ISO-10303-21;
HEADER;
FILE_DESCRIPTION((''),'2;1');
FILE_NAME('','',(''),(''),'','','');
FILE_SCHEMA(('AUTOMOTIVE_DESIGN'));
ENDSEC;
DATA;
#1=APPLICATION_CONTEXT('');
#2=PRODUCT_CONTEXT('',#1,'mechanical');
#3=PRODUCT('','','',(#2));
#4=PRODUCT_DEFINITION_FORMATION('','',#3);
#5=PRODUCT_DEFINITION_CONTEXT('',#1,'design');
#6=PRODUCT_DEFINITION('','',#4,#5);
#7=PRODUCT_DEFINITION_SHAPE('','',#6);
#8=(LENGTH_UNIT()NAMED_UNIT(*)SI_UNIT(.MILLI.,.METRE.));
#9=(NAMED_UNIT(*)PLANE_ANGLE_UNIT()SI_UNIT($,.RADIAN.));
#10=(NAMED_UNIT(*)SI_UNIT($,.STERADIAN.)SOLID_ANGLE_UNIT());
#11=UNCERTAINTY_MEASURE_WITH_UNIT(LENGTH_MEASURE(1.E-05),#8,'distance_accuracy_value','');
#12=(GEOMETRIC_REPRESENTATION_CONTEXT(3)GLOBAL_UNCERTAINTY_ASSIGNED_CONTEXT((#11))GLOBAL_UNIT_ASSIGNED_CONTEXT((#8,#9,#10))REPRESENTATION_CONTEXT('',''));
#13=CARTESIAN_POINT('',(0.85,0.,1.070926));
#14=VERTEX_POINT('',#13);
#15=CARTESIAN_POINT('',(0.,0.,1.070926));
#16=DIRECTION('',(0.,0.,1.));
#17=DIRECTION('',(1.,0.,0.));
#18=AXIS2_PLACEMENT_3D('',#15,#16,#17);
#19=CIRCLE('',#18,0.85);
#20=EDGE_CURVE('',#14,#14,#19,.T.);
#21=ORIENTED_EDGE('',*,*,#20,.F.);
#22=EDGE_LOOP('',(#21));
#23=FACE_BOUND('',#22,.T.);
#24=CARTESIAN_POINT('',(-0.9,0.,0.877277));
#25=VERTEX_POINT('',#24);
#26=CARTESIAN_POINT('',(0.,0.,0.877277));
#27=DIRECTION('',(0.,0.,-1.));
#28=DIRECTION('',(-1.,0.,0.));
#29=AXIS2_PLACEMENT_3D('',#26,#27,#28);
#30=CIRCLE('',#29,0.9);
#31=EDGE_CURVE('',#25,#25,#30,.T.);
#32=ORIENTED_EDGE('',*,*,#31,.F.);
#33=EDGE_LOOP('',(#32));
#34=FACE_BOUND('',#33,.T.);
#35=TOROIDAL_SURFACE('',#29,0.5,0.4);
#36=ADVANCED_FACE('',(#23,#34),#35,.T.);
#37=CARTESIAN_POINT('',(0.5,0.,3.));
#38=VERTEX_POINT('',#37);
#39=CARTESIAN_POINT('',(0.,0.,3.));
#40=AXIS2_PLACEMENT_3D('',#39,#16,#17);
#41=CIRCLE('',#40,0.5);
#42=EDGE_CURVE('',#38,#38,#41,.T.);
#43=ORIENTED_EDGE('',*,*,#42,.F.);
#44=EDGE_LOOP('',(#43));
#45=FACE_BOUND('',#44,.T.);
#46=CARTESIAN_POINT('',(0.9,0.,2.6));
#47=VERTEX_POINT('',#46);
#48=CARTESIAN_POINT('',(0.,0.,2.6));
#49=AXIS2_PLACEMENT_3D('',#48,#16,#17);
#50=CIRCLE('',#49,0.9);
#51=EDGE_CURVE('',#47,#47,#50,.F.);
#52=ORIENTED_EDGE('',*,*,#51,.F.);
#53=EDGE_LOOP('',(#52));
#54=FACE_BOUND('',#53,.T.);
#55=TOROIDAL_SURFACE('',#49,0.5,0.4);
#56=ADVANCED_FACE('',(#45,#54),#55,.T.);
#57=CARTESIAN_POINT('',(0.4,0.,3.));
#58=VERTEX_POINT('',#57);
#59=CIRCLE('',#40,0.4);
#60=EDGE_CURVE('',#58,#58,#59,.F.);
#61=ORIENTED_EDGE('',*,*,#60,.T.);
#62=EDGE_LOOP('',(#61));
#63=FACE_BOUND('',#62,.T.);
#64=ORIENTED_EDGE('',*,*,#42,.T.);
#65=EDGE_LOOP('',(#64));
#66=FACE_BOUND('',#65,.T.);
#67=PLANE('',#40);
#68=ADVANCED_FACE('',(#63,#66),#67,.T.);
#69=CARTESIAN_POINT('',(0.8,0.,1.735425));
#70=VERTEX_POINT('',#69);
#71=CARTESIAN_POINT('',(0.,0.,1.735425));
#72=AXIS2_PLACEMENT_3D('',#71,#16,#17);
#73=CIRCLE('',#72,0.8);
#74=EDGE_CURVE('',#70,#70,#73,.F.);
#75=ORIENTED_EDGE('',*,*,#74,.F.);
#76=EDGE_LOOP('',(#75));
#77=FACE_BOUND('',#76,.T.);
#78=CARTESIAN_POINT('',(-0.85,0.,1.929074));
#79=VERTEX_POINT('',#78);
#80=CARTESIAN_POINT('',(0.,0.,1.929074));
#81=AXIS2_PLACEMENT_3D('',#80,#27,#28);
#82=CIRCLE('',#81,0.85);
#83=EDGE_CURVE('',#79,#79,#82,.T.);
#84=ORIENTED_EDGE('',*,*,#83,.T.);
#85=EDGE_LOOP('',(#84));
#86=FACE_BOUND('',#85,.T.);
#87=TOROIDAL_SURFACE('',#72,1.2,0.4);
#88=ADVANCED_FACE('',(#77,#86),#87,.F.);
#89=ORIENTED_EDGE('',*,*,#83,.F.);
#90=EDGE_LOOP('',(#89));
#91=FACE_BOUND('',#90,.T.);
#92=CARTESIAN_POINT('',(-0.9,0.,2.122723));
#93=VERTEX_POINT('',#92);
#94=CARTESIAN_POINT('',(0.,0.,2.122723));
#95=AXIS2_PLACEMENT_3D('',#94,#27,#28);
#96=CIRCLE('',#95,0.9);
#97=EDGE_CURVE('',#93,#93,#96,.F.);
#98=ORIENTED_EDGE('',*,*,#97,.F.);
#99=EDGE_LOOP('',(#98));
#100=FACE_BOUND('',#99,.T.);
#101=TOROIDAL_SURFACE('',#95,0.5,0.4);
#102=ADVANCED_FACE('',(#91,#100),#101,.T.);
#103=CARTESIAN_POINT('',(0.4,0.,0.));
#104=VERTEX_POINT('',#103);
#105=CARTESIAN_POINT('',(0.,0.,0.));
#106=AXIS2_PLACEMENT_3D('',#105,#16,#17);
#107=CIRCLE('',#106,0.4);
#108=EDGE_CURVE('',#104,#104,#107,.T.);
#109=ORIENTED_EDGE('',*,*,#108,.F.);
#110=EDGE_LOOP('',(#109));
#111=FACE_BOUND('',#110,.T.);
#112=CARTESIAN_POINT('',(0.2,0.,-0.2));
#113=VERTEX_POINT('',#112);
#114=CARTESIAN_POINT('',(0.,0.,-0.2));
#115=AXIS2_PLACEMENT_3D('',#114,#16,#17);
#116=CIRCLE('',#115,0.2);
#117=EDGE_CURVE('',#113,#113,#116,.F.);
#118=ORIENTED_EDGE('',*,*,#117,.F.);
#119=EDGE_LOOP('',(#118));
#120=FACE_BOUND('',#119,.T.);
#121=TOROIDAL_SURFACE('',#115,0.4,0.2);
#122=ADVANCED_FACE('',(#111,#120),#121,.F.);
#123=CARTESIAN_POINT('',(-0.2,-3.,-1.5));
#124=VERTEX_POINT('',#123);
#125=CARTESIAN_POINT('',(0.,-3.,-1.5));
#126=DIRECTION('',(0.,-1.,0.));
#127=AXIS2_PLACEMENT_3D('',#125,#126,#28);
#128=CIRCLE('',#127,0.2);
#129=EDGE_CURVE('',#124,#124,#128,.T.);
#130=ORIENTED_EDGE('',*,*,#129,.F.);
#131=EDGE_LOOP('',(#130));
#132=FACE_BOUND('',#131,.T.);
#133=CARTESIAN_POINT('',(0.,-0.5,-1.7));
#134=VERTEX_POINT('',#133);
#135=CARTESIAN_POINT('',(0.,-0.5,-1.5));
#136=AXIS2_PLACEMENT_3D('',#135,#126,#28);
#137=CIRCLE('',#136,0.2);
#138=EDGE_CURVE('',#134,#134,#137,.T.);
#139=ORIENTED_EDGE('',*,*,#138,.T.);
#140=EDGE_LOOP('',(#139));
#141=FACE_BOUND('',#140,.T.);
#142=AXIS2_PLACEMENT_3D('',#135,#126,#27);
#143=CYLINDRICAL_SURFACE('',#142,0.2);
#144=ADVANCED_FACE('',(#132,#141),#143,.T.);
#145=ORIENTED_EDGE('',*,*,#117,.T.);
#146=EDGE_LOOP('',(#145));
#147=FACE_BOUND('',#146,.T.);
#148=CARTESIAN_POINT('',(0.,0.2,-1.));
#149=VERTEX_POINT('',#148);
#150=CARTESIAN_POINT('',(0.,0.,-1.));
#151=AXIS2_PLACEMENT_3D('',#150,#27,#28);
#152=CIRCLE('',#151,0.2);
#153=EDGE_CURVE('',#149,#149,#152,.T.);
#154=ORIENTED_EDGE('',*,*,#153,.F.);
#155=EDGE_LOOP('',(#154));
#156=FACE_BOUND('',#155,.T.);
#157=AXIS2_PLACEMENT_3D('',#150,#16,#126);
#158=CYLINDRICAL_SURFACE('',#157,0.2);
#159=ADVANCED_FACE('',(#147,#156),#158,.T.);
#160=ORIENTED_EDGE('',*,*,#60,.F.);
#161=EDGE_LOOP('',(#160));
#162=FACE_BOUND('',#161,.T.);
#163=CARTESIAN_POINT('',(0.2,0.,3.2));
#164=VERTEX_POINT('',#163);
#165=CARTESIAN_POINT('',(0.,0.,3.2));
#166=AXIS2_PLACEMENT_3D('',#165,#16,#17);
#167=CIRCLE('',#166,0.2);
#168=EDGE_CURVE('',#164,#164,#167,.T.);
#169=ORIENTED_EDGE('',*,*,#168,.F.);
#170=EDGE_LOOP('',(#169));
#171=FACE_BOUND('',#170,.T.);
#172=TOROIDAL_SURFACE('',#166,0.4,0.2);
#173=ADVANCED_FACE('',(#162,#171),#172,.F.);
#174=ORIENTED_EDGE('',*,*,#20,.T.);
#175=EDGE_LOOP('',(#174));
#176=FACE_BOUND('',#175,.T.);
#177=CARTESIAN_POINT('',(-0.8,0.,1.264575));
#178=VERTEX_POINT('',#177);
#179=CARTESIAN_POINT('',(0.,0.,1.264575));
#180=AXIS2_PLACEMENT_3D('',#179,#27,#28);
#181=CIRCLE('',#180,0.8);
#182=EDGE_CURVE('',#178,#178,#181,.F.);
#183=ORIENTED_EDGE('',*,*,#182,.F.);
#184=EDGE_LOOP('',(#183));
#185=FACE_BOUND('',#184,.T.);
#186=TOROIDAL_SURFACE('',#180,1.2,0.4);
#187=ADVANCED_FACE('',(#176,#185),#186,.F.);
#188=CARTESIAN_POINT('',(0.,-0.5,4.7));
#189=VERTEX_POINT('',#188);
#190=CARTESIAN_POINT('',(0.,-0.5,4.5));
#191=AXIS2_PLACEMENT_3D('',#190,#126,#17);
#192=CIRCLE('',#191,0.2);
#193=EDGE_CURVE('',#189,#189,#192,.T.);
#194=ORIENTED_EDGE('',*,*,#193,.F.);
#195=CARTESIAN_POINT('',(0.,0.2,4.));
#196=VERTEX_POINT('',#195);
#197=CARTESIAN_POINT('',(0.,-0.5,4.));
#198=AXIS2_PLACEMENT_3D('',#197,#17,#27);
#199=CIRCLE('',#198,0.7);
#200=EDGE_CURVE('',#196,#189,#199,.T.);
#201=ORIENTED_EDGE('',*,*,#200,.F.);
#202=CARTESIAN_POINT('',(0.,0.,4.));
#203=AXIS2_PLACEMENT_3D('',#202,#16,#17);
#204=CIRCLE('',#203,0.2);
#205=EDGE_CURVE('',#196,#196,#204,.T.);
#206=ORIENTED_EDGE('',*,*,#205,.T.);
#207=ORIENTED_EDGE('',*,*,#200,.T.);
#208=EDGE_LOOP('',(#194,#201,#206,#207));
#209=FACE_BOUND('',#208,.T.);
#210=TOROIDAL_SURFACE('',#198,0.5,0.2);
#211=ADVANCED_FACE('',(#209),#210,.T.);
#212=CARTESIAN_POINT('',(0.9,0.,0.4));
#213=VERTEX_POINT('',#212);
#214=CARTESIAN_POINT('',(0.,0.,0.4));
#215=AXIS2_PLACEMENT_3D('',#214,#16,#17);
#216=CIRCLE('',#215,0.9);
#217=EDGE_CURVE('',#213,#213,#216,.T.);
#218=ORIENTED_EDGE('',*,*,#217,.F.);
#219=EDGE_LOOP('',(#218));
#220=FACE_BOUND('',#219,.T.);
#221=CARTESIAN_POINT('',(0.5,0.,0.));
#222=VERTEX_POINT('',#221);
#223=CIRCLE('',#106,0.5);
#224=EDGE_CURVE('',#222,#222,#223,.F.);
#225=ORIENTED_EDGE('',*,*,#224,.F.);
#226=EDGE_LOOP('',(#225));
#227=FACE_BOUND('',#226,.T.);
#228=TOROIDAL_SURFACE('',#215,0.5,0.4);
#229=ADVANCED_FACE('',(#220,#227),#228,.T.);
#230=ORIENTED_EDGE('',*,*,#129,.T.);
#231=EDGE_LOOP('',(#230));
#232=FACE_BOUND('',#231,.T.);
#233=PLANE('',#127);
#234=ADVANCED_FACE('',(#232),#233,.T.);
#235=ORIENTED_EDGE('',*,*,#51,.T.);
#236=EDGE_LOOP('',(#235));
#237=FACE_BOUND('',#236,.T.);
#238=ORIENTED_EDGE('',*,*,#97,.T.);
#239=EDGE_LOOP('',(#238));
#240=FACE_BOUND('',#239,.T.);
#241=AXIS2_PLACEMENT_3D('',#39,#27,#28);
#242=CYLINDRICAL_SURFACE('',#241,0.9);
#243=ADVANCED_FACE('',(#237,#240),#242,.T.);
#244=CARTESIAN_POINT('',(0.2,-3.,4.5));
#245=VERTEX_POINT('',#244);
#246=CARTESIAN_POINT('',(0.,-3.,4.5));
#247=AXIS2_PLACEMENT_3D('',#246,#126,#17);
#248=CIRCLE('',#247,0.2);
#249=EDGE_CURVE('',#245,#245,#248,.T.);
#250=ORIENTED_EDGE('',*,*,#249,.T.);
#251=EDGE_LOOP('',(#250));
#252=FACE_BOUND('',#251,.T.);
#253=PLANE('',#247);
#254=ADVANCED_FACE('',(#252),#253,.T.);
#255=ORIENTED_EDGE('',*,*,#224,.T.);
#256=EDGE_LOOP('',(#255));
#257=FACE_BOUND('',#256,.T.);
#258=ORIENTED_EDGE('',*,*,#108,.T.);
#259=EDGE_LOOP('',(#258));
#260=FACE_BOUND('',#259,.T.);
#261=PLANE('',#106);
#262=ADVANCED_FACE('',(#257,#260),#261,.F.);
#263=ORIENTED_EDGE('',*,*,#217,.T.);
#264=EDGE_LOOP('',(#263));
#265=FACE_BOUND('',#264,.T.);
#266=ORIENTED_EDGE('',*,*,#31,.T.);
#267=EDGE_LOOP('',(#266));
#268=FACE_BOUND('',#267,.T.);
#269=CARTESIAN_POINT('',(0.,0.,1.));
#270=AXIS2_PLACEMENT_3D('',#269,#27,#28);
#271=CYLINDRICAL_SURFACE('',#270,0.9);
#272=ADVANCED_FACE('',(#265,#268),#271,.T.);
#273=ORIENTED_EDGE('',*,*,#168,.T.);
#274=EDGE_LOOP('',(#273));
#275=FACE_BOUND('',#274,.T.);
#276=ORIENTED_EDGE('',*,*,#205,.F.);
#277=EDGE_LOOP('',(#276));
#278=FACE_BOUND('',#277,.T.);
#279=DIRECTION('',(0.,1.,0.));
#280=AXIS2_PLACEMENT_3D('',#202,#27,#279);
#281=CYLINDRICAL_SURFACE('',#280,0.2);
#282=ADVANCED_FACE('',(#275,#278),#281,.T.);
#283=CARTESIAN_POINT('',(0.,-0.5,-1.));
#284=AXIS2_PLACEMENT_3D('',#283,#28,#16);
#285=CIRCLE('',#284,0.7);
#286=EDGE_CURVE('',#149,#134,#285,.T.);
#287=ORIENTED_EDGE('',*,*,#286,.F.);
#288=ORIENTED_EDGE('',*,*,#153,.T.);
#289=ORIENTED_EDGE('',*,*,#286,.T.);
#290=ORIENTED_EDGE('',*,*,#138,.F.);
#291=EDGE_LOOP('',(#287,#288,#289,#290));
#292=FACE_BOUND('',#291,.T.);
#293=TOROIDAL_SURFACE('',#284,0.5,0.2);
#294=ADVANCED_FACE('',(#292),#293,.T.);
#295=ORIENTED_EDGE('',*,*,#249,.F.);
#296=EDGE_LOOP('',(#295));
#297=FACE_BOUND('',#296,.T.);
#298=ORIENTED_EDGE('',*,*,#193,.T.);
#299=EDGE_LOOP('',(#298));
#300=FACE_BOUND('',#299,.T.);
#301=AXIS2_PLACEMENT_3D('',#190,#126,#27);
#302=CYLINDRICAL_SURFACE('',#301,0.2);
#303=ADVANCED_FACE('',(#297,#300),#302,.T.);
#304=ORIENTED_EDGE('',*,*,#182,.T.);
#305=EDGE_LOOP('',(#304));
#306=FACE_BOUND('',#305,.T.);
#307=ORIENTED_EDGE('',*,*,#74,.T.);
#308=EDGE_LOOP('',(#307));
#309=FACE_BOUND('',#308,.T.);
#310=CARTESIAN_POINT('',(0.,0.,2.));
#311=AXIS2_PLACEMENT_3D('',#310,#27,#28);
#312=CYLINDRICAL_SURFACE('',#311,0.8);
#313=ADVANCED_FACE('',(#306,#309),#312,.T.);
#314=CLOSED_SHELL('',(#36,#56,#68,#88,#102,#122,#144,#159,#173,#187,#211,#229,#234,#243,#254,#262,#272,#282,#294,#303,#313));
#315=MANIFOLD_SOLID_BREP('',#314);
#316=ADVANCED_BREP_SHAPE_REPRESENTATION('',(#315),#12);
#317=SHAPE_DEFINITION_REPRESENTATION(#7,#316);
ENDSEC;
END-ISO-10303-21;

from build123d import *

# Parameters (mm, degrees)
IZIM1_R                     = 0.9
Y_KSEKLIK_EKSTR_ZYON1_DEPTH = 1
IZIM2_R                     = 0.8
Y_KSEKLIK_EKSTR_ZYON2_DEPTH = 1
IZIM3_R                     = 0.9
Y_KSEKLIK_EKSTR_ZYON3_DEPTH = 1
IZIM5_R                     = 0.2
IZIM7_R                     = 0.2
RADYUS1_R                   = 0.4
RADYUS2_R                   = 0.4
RADYUS3_R                   = 0.4
RADYUS4_R                   = 0.2
RADYUS5_R                   = 0.2


with BuildPart() as part:
    # Çizim1 → Yükseklik-Ekstrüzyon1 (new body)
    with BuildSketch(Plane.XY):
        Circle(IZIM1_R)
    extrude(amount=Y_KSEKLIK_EKSTR_ZYON1_DEPTH)

    # Çizim2 → Yükseklik-Ekstrüzyon2 (add)
    with BuildSketch(Plane.XY.offset(1)):
        Circle(IZIM2_R)
    extrude(amount=Y_KSEKLIK_EKSTR_ZYON2_DEPTH)

    # Çizim3 → Yükseklik-Ekstrüzyon3 (add)
    with BuildSketch(Plane.XY.offset(2)):
        Circle(IZIM3_R)
    extrude(amount=Y_KSEKLIK_EKSTR_ZYON3_DEPTH)

    # Süpür1: sweep along a path in Çizim4
    with BuildLine(Plane(origin=(0, 0, 0), x_dir=(0, 0, -1), z_dir=(1, 0, 0))) as s_p_r1_path:
        Line((-2.815333461, 0), (-4, 0))
        ThreePointArc((-4, 0), (-4.353553391, -0.146446609), (-4.5, -0.5))
        Line((-4.5, -0.5), (-4.5, -3))
    # Çizim5 → Süpür1 (sweep)
    with BuildSketch(Plane.XY.offset(2.815333461)):
        Circle(IZIM5_R)
    sweep(path=s_p_r1_path.line)

    # Süpür2: sweep along a path in Çizim6
    with BuildLine(Plane(origin=(0, 0, 0), x_dir=(0, 0, -1), z_dir=(1, 0, 0))) as s_p_r2_path:
        Line((-0.354844332, 0), (1, 0))
        ThreePointArc((1, 0), (1.353553391, -0.146446609), (1.5, -0.5))
        Line((1.5, -0.5), (1.5, -3))
    # Çizim7 → Süpür2 (sweep)
    with BuildSketch(Plane(origin=(0, 0, 0.354844332), x_dir=(-1, 0, 0), z_dir=(0, 0, -1))):
        Circle(IZIM7_R)
    sweep(path=s_p_r2_path.line)

    # Radyus1
    # the kernel refuses this fillet: 0.4 mm, written as the material it adds along each edge
    with BuildSketch(Plane(origin=(0, 0, 1), x_dir=(1, 0, 0), z_dir=(0, -1, 0))) as radyus1_piece_1:
        with BuildLine():
            CenterArc((1.2, 0.264575131), RADYUS1_R, 180, 41.409622109)
            Line((0.9, 0), (0.894, -0.005291503))
            ThreePointArc((0.894, -0.005291503), (0.85, -0.008), (0.8, -0.008))
            Line((0.8, -0.008), (0.792, 0))
            Line((0.792, 0), (0.792, 0.264575131))
            Line((0.792, 0.264575131), (0.8, 0.264575131))
        make_face()
    revolve(axis=Axis((0, 0, 1), (0, 0, 1)))
    with BuildSketch(Plane(origin=(0, 0, 2), x_dir=(1, 0, 0), z_dir=(0, -1, 0))) as radyus1_piece_2:
        with BuildLine():
            CenterArc((1.2, -0.264575131), RADYUS1_R, 138.590377891, 41.409622109)
            Line((0.8, -0.264575131), (0.792, -0.264575131))
            Line((0.792, -0.264575131), (0.792, 0))
            Line((0.792, 0), (0.8, 0.008))
            ThreePointArc((0.8, 0.008), (0.85, 0.008), (0.894, 0.005291503))
            Line((0.894, 0.005291503), (0.9, 0))
        make_face()
    revolve(axis=Axis((0, 0, 2), (0, 0, 1)))

    # Radyus2
    radyus2_edges = [part.edges().sort_by_distance(p)[0] for p in [
        (-0.9, 0, 0),
        (-0.9, 0, 1),
    ]]
    fillet(radyus2_edges, radius=RADYUS2_R)

    # Radyus3
    radyus3_edges = [part.edges().sort_by_distance(p)[0] for p in [
        (-0.9, 0, 2),
        (-0.9, 0, 3),
    ]]
    fillet(radyus3_edges, radius=RADYUS3_R)

    # Radyus4
    radyus4_edges = [part.edges().sort_by_distance(p)[0] for p in [
        (-0.2, 0, 3),
    ]]
    fillet(radyus4_edges, radius=RADYUS4_R)

    # Radyus5
    radyus5_edges = [part.edges().sort_by_distance(p)[0] for p in [
        (0.2, 0, 0),
    ]]
    fillet(radyus5_edges, radius=RADYUS5_R)


solid = part.part
